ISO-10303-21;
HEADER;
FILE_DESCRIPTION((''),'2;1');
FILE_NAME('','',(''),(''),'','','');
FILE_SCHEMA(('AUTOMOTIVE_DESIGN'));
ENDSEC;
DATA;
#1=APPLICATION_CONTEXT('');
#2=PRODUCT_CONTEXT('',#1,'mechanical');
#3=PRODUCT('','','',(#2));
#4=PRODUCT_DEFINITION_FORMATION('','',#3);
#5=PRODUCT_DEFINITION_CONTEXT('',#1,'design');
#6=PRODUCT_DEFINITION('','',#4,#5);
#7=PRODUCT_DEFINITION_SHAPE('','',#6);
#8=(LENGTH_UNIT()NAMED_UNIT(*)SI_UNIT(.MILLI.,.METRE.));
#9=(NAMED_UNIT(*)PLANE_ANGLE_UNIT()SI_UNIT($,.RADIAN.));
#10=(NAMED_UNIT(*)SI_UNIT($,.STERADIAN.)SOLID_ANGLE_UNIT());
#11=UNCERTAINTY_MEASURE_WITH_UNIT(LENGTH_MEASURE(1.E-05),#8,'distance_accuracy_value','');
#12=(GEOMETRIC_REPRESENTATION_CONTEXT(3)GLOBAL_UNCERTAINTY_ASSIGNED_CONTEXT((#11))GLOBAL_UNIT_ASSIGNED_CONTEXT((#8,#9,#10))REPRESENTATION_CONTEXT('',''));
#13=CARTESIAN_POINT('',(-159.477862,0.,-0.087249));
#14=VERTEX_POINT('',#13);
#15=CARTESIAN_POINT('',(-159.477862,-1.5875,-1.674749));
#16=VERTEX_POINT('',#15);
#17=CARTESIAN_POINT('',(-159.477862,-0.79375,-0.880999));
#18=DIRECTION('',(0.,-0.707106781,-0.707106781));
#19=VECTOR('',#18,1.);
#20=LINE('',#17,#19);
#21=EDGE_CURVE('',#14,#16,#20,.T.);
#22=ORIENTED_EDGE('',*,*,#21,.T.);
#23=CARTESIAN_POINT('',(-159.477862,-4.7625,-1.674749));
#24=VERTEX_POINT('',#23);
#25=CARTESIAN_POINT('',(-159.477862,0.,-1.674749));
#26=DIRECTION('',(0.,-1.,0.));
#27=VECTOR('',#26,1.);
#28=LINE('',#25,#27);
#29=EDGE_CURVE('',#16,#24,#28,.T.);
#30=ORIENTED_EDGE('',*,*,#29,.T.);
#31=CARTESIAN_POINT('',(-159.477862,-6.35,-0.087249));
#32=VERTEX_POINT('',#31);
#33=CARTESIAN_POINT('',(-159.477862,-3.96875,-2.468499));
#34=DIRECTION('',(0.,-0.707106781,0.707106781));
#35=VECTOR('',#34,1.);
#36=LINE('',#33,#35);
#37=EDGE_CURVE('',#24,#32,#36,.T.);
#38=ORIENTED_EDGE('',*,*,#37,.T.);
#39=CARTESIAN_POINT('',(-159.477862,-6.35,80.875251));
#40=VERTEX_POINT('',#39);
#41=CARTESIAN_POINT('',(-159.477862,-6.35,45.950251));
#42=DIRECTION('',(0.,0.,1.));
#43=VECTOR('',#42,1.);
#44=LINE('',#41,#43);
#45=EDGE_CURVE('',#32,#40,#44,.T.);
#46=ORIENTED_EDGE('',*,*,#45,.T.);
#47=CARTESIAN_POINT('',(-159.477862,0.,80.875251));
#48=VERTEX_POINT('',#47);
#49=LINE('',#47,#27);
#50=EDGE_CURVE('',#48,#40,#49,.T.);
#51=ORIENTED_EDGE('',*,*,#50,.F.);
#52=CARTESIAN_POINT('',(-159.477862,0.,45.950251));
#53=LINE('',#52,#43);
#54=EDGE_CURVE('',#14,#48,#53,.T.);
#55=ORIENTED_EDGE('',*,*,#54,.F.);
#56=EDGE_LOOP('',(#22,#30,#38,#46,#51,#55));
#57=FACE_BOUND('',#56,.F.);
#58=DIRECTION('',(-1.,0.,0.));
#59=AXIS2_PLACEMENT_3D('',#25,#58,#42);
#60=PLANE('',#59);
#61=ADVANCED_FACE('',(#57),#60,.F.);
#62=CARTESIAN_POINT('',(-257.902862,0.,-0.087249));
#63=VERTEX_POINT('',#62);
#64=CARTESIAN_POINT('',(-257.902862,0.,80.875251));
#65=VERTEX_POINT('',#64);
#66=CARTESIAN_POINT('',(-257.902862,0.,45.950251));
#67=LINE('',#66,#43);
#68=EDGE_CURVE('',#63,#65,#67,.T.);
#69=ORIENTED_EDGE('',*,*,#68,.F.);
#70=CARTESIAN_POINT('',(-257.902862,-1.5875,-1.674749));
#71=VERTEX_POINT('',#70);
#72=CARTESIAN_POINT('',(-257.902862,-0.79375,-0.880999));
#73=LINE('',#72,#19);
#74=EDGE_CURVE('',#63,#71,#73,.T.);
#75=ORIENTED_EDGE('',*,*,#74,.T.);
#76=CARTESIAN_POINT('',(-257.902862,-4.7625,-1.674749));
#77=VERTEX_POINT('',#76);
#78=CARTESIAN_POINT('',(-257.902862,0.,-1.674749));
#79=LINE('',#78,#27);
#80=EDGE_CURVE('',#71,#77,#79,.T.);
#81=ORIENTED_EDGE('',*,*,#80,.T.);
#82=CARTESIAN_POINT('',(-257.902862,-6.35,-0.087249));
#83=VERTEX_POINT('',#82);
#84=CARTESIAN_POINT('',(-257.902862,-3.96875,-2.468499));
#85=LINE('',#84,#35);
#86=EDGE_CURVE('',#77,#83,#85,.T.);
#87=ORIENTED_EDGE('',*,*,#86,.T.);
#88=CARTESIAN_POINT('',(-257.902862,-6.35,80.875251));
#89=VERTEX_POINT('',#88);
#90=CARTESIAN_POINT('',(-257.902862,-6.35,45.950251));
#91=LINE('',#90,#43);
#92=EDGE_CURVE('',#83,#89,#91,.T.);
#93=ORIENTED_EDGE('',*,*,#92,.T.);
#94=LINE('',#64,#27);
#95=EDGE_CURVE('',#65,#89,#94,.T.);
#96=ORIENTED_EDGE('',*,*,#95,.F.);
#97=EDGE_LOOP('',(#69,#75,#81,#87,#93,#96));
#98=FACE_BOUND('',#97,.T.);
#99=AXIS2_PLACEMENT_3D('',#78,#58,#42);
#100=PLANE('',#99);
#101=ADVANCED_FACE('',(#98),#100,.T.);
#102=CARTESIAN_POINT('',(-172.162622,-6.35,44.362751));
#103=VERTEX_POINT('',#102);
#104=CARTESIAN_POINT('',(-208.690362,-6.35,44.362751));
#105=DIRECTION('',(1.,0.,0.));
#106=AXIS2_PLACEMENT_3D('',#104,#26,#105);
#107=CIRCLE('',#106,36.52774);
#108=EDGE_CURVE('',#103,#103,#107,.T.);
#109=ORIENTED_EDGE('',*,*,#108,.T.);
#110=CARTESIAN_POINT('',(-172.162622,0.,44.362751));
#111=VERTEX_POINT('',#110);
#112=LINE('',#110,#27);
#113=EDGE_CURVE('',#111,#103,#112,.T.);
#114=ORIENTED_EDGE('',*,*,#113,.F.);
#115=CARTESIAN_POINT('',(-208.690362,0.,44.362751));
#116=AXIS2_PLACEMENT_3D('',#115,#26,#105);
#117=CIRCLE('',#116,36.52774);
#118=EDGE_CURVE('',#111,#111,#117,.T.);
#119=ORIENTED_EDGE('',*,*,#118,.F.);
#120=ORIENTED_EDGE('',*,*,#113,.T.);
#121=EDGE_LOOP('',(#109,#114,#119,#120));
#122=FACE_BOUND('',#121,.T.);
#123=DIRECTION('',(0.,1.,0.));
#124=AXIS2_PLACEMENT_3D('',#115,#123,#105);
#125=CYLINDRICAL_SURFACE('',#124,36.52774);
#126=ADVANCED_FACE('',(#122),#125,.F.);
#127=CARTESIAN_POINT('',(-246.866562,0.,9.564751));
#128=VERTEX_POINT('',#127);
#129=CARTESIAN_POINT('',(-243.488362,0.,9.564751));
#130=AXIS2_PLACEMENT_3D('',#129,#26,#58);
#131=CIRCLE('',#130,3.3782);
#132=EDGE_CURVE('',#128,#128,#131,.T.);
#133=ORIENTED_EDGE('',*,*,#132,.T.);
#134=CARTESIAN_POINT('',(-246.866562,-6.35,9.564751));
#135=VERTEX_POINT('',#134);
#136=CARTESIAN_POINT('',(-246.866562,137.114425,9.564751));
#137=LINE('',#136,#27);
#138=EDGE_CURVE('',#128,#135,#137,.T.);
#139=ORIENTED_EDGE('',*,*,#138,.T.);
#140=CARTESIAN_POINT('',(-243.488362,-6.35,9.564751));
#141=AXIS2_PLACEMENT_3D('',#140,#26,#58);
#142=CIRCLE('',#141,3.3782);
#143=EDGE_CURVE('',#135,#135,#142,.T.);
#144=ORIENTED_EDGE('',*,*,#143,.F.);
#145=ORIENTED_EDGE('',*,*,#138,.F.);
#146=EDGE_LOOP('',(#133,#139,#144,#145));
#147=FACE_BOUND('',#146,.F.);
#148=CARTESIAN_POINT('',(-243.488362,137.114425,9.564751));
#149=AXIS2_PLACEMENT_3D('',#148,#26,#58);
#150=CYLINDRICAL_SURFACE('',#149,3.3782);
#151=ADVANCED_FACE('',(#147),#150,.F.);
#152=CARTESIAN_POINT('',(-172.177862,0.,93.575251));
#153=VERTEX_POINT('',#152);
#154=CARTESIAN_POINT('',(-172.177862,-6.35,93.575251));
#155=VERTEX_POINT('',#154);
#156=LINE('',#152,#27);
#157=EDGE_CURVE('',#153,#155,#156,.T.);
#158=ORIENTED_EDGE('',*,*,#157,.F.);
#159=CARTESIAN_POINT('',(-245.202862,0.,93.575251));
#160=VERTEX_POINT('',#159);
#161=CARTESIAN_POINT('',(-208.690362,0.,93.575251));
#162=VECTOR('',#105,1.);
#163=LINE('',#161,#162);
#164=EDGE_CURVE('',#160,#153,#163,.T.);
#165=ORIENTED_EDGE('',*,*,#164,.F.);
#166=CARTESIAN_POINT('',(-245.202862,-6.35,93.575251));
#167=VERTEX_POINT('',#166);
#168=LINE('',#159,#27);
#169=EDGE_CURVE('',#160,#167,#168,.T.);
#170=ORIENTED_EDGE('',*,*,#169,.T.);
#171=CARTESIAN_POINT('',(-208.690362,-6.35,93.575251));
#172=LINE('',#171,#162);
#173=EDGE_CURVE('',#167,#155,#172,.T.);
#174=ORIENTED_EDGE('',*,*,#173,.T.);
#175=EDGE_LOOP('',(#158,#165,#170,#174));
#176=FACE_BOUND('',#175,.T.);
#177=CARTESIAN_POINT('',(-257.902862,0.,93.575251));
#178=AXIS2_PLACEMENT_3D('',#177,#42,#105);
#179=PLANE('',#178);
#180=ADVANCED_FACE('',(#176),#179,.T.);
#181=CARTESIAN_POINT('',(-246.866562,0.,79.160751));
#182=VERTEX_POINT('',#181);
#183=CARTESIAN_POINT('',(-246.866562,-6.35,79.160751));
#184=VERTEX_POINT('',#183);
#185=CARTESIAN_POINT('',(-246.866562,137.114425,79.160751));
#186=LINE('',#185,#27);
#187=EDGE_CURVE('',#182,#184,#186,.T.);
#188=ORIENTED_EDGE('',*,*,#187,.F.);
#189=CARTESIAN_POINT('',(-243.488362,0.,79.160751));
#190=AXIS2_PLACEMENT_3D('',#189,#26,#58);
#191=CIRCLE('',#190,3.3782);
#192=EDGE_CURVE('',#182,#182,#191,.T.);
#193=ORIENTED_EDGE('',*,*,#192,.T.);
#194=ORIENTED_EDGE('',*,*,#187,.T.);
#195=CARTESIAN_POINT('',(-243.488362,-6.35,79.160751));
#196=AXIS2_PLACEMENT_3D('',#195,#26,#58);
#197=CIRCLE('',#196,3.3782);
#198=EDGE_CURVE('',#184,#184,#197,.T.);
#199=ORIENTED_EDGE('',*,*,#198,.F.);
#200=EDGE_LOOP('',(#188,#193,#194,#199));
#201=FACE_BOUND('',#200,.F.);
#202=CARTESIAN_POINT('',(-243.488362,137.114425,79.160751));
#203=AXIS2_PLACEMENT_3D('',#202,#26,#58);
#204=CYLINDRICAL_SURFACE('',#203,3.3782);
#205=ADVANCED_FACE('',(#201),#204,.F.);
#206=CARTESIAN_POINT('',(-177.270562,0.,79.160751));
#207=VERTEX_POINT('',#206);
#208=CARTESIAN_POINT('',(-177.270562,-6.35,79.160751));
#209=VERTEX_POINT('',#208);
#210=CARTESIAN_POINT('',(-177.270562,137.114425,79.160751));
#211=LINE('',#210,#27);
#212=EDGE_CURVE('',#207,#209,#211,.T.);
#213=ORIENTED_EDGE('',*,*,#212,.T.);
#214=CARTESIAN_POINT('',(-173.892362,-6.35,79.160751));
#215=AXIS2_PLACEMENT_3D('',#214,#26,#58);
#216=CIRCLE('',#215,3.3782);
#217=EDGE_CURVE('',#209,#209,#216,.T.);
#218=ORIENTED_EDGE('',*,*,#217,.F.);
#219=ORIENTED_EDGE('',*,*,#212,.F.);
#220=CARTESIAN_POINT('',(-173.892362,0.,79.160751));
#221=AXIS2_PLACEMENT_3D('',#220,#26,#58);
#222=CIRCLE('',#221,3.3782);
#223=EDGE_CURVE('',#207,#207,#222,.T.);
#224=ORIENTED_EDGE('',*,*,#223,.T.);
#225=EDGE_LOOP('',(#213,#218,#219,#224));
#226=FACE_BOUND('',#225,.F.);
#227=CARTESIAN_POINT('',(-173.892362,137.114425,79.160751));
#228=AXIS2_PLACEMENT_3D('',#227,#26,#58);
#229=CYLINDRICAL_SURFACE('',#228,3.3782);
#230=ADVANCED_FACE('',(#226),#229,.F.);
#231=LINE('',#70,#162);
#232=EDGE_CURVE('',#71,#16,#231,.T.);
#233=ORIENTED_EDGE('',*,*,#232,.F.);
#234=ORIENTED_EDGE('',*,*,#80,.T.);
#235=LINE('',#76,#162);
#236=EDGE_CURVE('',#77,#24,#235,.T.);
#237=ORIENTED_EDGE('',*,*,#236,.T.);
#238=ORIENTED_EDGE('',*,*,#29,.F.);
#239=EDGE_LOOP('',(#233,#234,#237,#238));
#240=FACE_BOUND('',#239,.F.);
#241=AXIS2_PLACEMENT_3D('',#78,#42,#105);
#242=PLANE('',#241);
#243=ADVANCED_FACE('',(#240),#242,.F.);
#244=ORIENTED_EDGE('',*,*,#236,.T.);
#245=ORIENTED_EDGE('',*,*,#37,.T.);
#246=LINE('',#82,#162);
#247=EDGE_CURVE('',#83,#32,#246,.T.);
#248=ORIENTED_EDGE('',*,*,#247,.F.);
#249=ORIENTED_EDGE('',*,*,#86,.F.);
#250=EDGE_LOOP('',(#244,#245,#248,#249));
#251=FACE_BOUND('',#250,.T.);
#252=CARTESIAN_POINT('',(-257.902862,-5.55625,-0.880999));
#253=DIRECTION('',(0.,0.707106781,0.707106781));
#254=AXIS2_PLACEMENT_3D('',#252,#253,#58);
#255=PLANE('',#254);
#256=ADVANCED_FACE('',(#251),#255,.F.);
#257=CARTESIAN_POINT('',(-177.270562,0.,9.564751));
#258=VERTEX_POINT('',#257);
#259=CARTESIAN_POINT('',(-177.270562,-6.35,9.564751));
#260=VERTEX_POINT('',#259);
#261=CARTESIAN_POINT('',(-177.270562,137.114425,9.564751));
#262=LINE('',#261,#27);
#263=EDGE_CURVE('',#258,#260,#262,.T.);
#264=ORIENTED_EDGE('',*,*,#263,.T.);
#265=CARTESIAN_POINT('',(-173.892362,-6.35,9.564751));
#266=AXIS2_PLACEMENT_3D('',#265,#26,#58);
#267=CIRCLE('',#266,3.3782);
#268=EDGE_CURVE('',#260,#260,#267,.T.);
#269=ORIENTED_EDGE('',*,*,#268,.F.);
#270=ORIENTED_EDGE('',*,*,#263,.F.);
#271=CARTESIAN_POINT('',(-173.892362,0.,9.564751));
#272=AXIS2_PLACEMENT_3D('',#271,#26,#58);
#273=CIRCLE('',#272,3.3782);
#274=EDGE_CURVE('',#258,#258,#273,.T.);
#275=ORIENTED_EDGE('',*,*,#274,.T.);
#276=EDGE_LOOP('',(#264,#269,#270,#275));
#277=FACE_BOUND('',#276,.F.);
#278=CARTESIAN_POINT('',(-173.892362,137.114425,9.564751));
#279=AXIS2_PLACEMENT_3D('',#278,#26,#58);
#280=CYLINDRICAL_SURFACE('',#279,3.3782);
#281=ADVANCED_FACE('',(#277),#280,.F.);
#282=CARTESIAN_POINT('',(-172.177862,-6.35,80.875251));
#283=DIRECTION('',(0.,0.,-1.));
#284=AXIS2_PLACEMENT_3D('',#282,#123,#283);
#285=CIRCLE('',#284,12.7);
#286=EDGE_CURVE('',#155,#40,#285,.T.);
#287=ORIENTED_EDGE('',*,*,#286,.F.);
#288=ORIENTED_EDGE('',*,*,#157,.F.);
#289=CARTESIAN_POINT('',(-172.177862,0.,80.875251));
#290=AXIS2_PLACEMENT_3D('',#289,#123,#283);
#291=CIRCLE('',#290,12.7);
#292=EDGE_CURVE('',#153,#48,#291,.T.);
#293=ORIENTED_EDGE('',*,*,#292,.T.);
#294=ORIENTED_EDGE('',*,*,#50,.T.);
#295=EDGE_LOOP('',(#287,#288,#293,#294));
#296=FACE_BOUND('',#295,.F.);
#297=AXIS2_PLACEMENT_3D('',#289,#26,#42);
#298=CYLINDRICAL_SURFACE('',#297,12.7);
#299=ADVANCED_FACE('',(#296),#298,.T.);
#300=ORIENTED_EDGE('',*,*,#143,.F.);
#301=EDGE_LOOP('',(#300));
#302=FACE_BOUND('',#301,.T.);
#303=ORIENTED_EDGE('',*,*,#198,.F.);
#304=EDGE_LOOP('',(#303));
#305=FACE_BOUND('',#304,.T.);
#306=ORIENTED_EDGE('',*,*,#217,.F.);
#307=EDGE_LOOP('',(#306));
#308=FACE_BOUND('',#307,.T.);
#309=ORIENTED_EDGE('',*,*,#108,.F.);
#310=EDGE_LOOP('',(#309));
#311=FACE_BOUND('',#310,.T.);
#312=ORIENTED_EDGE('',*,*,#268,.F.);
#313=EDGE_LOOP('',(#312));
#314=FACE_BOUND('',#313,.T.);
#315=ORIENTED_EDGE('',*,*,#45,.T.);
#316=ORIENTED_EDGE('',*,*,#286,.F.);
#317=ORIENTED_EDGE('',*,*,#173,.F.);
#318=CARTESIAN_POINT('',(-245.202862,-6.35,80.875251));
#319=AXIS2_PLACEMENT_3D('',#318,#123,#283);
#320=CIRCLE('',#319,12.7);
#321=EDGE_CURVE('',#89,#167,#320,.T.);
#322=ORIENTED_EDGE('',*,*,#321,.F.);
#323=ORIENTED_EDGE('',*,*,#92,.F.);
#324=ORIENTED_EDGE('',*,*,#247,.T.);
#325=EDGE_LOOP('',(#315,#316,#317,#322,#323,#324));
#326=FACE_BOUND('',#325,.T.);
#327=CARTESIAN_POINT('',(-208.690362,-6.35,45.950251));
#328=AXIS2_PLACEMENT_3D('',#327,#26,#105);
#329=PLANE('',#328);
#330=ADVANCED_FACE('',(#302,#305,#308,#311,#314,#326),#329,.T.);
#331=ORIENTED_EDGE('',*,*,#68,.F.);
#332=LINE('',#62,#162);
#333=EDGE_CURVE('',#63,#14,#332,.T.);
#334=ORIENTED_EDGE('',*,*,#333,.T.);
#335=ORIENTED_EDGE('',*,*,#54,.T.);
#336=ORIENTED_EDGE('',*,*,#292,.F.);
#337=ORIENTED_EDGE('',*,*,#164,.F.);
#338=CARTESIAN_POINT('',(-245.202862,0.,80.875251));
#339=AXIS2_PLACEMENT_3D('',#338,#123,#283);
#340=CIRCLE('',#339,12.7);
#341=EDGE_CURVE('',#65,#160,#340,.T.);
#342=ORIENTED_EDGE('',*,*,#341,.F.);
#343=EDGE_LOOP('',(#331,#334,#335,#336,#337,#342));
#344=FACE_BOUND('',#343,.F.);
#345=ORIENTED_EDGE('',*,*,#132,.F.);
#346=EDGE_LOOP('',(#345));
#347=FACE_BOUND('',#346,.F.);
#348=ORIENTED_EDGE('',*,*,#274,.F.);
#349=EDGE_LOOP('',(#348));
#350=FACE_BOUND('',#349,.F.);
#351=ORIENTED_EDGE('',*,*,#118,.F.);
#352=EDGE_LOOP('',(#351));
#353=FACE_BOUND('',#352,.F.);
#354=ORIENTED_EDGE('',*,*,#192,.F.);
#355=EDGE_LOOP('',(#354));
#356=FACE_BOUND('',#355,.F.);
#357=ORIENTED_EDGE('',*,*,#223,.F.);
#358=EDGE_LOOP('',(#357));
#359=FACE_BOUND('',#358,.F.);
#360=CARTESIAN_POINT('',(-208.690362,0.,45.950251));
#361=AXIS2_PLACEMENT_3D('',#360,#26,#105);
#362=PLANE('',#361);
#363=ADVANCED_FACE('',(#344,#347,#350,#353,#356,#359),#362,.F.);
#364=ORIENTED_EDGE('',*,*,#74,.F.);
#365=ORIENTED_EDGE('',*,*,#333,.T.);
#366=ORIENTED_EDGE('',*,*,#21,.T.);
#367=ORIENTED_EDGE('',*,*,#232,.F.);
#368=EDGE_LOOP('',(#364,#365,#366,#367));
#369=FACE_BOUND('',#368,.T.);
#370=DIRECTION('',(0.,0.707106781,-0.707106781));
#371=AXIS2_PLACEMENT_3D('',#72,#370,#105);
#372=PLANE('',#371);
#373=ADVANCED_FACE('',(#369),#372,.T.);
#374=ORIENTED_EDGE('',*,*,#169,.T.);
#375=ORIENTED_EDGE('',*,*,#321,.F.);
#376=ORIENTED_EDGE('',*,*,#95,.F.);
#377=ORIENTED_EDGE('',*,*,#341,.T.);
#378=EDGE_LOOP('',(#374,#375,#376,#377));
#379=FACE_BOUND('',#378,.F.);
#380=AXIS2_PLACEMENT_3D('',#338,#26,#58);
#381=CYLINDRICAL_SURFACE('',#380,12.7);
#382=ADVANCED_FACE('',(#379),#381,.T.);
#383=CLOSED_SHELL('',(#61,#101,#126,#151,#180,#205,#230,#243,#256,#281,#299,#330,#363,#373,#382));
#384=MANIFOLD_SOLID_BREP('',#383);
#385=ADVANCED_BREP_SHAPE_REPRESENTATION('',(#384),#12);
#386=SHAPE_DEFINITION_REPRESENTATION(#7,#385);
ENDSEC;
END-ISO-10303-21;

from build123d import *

# Parameters (mm, degrees)
F1_W     = 98.425
F1_H     = 95.25
F1_R     = 36.52774
F2_DEPTH = 6.35
F3_R     = 12.7
F4_SIZE  = 1.5875
F5_D     = 6.7564


# Not quite as in the source:
# - a feature names something its author has since deleted; it is built from what else it names


with BuildPart() as f2:
    # F1 (on face) → F2 (new body)
    with BuildSketch(Plane.XZ):
        with Locations((-208.6903624, 45.950251)):
            Rectangle(F1_W, F1_H)
        Polygon((-169.1837104, 87.1821218), (-168.4475168, 87.1002576), (-167.7522426, 86.8546396), (-167.0979132, 86.4459282), (-166.6073376, 85.9140776), (-165.944296, 85.3010232), (-165.6990082, 84.6054442), (-165.617144, 83.8692252), (-165.617144, 4.8562514), (-165.6990082, 4.1200578), (-165.944296, 3.4251392), (-166.6073376, 2.811399), (-167.0979132, 2.2795484), (-167.7522426, 1.9114516), (-168.4475168, 1.666494), (-169.1837104, 1.5846298), (-248.1557394, 1.5846298), (-248.8919584, 1.666494), (-249.5872072, 1.9114516), (-250.2415366, 2.2795484), (-250.9864424, 2.811399), (-251.395484, 3.4251392), (-251.6407718, 4.1200578), (-251.7226614, 4.8562514), (-251.7226614, 83.8692252), (-251.6407718, 84.6054442), (-251.395484, 85.3010232), (-250.9864424, 85.9140776), (-250.2415366, 86.4459282), (-249.5872072, 86.8546396), (-248.8919584, 87.1002576), (-248.1557394, 87.1821218), align=None, mode=Mode.SUBTRACT)
        Polygon((-167.7522426, 86.8546396), (-168.4475168, 87.1002576), (-169.1837104, 87.1821218), (-248.1557394, 87.1821218), (-248.8919584, 87.1002576), (-249.5872072, 86.8546396), (-250.2415366, 86.4459282), (-250.9864424, 85.9140776), (-251.395484, 85.3010232), (-251.6407718, 84.6054442), (-251.7226614, 83.8692252), (-251.7226614, 4.8562514), (-251.6407718, 4.1200578), (-251.395484, 3.4251392), (-250.9864424, 2.811399), (-250.2415366, 2.2795484), (-249.5872072, 1.9114516), (-248.8919584, 1.666494), (-248.1557394, 1.5846298), (-169.1837104, 1.5846298), (-168.4475168, 1.666494), (-167.7522426, 1.9114516), (-167.0979132, 2.2795484), (-166.6073376, 2.811399), (-165.944296, 3.4251392), (-165.6990082, 4.1200578), (-165.617144, 4.8562514), (-165.617144, 83.8692252), (-165.6990082, 84.6054442), (-165.944296, 85.3010232), (-166.6073376, 85.9140776), (-167.0979132, 86.4459282), align=None)
        with Locations((-208.6903624, 44.362751)):
            Circle(F1_R, mode=Mode.SUBTRACT)
    extrude(amount=F2_DEPTH)

    # F3
    f3_edges = [f2.edges().sort_by_distance(p)[0] for p in [
        (-257.902862, -3.175, 93.575251),
        (-159.477862, -3.175, 93.575251),
    ]]
    fillet(f3_edges, radius=F3_R)

    # F4
    f4_edges = [f2.edges().sort_by_distance(p)[0] for p in [
        (-208.690362, 0, -1.674749),
        (-208.690362, -6.35, -1.674749),
    ]]
    chamfer(f4_edges, length=F4_SIZE)

    # F5 (through all)
    with Locations(Plane(origin=(0, 0, 0), x_dir=(1, 0, 0), z_dir=(0, 1, 0))):
        with Locations((-243.4883624, -79.160751), (-173.8923624, -79.160751), (-173.8923624, -9.564751), (-243.4883624, -9.564751)):
            Hole(F5_D / 2)


solid = f2.part
